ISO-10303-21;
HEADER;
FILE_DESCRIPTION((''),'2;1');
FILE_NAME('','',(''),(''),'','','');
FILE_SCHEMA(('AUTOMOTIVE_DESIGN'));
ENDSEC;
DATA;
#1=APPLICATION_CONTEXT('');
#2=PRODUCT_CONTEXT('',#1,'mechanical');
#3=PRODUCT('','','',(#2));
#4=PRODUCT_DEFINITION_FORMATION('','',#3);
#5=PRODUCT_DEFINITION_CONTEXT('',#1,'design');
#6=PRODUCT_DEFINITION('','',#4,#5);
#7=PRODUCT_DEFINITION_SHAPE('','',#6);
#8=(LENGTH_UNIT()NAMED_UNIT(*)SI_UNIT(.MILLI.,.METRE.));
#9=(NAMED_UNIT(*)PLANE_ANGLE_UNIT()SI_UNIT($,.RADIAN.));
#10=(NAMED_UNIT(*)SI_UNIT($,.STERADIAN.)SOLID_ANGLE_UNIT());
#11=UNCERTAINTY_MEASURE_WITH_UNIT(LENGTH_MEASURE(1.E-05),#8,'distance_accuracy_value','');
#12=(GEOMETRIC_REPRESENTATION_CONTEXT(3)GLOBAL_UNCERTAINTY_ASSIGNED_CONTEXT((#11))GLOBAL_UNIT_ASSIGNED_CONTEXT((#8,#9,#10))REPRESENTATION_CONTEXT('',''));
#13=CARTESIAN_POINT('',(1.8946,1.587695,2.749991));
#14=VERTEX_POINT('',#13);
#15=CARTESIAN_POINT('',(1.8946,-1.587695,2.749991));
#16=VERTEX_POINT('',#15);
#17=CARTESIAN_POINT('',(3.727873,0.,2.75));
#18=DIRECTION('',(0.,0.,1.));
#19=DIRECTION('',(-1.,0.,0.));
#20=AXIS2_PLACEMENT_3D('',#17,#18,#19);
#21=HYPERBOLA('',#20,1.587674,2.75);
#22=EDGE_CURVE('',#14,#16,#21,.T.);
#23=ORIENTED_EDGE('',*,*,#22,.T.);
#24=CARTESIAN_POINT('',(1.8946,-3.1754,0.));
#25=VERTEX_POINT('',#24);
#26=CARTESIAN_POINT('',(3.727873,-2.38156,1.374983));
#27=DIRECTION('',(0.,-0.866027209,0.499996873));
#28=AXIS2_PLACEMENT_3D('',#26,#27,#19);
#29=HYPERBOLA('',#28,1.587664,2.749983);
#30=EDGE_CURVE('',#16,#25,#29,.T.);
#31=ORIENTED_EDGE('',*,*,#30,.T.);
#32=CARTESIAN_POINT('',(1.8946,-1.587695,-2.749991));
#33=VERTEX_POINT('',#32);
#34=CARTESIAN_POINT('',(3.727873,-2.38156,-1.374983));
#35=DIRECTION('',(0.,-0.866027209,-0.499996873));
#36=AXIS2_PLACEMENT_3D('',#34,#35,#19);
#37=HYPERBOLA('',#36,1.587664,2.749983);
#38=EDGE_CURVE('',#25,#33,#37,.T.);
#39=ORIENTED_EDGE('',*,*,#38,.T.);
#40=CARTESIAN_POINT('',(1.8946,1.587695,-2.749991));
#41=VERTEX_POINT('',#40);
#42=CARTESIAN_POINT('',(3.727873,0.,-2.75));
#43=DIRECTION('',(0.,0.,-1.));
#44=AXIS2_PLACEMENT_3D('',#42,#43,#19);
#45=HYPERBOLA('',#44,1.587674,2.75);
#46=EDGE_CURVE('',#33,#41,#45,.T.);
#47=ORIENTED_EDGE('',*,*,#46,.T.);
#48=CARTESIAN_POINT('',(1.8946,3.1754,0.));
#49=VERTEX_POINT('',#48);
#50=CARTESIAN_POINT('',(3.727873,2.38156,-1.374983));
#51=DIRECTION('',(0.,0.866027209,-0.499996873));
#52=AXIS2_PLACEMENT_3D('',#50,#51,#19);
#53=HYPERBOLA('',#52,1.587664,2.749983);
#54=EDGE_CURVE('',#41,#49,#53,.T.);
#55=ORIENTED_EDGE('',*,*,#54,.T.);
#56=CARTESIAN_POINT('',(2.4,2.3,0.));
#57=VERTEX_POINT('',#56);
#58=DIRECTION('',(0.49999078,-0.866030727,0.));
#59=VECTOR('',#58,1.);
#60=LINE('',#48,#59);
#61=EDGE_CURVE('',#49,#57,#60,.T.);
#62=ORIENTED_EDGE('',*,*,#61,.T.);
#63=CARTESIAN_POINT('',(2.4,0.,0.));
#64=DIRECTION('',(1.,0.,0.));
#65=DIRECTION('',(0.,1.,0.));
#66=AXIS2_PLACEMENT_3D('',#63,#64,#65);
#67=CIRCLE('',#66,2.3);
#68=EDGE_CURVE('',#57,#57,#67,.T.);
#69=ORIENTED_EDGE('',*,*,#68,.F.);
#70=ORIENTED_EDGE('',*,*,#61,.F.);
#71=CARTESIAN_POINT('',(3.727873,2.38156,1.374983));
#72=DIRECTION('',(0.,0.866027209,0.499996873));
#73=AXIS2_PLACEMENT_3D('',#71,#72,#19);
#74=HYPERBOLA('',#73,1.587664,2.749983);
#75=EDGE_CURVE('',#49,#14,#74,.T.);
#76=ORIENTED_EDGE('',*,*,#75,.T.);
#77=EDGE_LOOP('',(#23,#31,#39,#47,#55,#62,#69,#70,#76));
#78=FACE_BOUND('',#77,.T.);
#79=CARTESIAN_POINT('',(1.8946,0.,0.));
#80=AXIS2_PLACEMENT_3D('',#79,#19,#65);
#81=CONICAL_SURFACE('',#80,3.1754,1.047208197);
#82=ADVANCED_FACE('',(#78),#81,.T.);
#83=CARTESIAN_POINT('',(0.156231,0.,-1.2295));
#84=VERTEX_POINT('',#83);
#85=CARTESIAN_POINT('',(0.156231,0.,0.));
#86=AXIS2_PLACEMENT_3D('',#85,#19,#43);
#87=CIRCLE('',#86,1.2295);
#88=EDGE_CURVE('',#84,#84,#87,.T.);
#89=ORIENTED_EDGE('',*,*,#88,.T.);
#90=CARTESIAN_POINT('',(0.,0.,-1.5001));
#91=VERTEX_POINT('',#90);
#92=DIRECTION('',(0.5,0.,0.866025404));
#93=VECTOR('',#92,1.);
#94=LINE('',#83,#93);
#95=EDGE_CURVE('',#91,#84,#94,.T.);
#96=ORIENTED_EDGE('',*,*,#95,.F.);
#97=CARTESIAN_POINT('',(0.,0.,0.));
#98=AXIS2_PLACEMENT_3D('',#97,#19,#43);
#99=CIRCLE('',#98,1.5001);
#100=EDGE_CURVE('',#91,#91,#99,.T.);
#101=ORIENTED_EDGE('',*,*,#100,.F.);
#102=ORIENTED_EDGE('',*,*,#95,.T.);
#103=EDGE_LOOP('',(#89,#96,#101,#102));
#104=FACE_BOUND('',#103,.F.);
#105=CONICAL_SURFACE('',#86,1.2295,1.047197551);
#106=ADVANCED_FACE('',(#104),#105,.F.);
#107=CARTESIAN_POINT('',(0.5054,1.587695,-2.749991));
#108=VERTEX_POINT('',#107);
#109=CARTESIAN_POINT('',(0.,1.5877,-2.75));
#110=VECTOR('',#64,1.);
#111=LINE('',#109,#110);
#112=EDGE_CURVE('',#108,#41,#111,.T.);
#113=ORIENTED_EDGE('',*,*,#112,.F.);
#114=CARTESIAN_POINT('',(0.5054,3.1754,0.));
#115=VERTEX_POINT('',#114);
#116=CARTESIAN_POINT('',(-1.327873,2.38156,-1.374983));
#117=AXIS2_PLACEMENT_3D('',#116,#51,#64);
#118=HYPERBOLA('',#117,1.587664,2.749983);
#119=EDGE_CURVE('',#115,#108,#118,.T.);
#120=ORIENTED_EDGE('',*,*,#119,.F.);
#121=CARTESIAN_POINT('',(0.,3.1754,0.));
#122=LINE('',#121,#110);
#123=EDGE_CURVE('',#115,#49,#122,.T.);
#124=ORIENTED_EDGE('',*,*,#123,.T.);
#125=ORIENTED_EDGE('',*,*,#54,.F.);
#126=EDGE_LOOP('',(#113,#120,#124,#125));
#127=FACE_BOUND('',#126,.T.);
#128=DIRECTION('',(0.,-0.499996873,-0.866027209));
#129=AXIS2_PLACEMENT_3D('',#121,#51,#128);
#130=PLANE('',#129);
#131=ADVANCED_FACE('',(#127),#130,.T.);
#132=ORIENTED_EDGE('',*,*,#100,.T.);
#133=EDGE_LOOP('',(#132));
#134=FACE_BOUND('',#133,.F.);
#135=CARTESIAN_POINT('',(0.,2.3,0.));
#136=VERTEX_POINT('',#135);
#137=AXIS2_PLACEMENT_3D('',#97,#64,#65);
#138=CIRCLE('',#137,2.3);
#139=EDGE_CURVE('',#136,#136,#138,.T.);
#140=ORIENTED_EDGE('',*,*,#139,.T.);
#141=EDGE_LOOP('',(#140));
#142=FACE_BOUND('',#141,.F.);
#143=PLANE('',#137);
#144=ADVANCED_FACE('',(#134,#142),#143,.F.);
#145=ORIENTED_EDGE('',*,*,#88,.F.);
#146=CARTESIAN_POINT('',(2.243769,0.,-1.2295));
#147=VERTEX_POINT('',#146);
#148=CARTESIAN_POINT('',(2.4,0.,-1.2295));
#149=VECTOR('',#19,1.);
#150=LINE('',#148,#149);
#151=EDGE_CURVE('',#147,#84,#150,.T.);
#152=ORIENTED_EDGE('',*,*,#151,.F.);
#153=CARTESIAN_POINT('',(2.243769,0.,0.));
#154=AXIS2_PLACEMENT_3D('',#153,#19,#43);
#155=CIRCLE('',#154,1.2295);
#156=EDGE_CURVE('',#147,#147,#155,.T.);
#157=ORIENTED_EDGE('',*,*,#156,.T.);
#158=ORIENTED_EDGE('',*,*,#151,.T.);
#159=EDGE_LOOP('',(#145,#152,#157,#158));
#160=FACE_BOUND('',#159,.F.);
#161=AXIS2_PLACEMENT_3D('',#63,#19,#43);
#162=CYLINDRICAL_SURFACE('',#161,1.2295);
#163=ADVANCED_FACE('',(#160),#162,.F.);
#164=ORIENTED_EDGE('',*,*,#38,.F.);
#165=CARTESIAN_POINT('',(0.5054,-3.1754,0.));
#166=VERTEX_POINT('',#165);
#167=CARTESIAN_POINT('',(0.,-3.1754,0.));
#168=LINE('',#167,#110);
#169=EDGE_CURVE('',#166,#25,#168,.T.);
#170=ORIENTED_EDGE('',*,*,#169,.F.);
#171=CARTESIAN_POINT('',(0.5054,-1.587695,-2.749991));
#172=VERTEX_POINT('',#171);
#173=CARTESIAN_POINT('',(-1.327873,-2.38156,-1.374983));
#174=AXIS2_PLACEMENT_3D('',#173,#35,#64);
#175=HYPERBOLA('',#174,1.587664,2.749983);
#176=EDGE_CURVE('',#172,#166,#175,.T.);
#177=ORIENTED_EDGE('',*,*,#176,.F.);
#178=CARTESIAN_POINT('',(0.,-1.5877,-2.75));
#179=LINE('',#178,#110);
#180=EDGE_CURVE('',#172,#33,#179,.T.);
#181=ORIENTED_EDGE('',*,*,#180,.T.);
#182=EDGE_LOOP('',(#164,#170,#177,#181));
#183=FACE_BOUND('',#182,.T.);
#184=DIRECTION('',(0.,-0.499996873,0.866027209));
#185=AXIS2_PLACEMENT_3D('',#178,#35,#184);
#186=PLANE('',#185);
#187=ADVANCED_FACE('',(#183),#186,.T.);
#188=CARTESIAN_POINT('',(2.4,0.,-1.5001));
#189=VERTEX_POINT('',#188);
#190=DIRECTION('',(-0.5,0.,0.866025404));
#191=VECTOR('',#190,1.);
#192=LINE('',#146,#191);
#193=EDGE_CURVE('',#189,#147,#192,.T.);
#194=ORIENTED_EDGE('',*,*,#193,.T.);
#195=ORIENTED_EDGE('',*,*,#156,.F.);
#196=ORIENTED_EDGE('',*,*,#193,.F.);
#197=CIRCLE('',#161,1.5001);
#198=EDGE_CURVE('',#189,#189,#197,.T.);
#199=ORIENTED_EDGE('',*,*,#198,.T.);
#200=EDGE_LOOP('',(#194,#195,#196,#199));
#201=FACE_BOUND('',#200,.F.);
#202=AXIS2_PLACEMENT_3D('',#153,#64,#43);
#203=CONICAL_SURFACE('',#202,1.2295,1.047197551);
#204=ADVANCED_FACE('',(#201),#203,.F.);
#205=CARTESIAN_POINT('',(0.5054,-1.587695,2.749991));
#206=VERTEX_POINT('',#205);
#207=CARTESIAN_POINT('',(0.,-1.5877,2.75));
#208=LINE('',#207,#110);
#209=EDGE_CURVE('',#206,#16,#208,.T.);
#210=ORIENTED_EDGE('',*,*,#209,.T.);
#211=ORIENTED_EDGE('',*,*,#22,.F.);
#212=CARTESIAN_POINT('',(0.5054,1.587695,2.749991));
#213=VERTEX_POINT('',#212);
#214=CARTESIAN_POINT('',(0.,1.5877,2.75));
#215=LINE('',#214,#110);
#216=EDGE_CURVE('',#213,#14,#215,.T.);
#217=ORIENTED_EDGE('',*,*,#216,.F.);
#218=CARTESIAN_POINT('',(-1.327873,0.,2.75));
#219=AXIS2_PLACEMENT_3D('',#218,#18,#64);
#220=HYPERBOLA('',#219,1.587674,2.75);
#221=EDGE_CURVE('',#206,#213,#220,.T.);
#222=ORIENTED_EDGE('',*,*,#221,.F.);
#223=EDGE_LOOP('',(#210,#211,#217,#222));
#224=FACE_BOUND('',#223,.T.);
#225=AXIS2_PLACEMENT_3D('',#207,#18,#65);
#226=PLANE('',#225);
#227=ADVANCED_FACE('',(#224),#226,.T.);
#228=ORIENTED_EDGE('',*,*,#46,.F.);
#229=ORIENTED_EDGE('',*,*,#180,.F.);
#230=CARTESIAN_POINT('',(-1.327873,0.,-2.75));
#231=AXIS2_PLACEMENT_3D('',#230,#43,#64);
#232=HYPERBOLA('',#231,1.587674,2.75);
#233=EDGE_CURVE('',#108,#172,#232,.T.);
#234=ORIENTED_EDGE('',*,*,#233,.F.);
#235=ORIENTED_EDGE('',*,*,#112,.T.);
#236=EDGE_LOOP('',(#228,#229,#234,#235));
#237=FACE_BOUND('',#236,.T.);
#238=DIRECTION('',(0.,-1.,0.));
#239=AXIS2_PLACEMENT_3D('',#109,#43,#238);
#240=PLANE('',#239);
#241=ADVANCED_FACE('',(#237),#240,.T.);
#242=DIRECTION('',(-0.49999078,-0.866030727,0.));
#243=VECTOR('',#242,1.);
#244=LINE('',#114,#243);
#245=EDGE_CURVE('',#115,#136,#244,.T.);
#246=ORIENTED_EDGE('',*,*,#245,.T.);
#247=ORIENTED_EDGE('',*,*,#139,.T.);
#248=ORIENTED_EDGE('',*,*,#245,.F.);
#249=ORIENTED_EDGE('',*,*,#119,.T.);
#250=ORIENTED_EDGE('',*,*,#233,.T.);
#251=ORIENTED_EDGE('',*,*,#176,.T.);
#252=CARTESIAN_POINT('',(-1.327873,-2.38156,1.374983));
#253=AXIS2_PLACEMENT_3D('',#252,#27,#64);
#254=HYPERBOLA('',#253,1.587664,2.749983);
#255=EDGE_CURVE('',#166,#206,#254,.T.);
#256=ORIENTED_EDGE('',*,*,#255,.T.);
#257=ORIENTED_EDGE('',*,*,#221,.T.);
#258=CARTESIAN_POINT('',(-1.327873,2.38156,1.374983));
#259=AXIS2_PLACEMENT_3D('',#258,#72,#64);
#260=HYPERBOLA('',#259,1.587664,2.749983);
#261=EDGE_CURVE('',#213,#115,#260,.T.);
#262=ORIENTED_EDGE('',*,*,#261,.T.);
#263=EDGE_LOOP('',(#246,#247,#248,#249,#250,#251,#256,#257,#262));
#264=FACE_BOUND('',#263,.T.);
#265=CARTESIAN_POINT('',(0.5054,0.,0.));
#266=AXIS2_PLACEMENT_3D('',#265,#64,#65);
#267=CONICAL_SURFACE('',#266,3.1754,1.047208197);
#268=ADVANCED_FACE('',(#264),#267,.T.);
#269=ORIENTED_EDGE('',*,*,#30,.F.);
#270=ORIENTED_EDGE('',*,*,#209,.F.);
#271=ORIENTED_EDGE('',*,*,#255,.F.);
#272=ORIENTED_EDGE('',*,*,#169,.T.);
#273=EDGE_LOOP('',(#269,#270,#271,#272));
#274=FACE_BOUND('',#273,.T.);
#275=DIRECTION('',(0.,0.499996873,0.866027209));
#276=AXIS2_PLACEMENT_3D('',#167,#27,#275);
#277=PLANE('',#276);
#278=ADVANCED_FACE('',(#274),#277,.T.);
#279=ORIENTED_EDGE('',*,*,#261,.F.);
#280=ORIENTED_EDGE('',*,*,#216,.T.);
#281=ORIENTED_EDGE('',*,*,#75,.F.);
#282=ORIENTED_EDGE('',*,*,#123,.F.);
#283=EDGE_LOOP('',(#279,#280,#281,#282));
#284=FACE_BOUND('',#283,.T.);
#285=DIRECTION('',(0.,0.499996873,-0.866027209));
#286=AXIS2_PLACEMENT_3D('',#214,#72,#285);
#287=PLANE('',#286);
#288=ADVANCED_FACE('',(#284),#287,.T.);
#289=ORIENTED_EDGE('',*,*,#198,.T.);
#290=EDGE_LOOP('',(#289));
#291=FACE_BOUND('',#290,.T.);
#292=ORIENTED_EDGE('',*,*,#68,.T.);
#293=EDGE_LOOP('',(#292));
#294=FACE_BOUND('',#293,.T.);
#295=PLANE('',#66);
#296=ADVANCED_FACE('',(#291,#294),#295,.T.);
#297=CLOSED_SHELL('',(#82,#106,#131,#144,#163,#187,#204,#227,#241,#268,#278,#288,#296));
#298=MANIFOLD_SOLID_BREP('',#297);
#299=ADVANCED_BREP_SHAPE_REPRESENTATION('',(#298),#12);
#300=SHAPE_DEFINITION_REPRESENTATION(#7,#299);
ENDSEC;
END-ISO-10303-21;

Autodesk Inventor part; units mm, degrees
ref_plane "YZ Plane" through (0, 0, 0) normal (1, 0, 0) x (0, 1, 0)
ref_plane "XZ Plane" through (0, 0, 0) normal (0, 1, 0) x (-1, 0, 0)
sketch "Skizze1" plane through (0, 0, 0) normal (1, 0, 0) x (0, 1, 0)
  line L0 (-3.1754, 0) -> (-1.5877, 2.75)
  line L1 (-1.5877, 2.75) -> (1.5877, 2.75)
  line L2 (1.5877, 2.75) -> (3.1754, 0)
  line L3 (3.1754, 0) -> (1.5877, -2.75)
  line L4 (1.5877, -2.75) -> (-1.5877, -2.75)
  line L5 (-1.5877, -2.75) -> (-3.1754, 0)
  point P0 (0, 0)
  point P1 (0, 0)
  dimension "d0" = 6.3509
extrude "Körper" add sketch "Skizze1" along normal blind 2.4
sketch "Skizze2" plane through (0, 0, 0) normal (0, 0, 1) x (1, 0, 0)
  line L0 (0, 1.5877) -> (0, 3.1754) projected
  line L1 (0, 3.1754) -> (2.4, 3.1754) projected
  line L2 (2.4, 1.5877) -> (2.4, 3.1754) projected
  line L3 (-0.48, 0) -> (2.88, 0) projected
  line L4 (0.5054, 3.1754) -> (0, 2.3)
  line L5 (1.8946, 3.1754) -> (2.4, 2.3)
  dimension "d3" = 30
  dimension "d4" = 30
  dimension "d5" = 4.6
  dimension "d6" = 4.6
revolve "Fase1" cut sketch "Skizze2" angle 360 about axis through (-10, 0, 0) along (1, 0, 0)
sketch "Skizze3" plane through (2.4, 0, 0) normal (1, 0, 0) x (0, 0, -1)
  arc A0 (-0.625, -1.0825) -> (0.625, -1.0825) centre (0, 0) ccw projected
hole "Gewinde" at (2.4, 0, 0) direction (-1, 0, 0) diameter 2.459 end through all thread size "M3x0.5" class "6H" standard "ISO Metric profile"
chamfer "Fase2" distance 0.2706 angle 30 1 edges at (2.4, 0, 1.2295) measured on face at (2.4, 1.9179, -0.2329)
chamfer "Fase3" distance 0.2706 angle 30 1 edges at (0, 0, 1.2295) measured on face at (0, 1.9179, -0.2329)
ref_plane "Work Plane1" through (-6.3375, 0, 0) normal (0, -0.8660254, -0.5) x (1, 0, 0)
equation "\"d0\" = 1.1547 * SW"
equation "\"d1\" = KOH"
equation "\"d8\" = -0.5 * GD1 + 0.5 * NND"
equation "\"d40\" = -0.5 * GD1 + 0.5 * NND"
equation "\"d10\" = -0.5 * GD1 + 0.5 * NND"
equation "\"d41\" = -0.5 * GD1 + 0.5 * NND"
equation "\"d3\" = ANG1"
equation "\"d4\" = ANG2"
equation "\"d5\" = SW0"
equation "\"d6\" = SW01"
equation "\"ANG1\" = 30deg"
equation "\"ANG2\" = 30deg"
equation "\"NND\" = 3"
equation "\"KOH\" = 2.4"
equation "\"SW\" = 5.5"
equation "\"SW0\" = 4.6"
equation "\"SW01\" = 4.6"
equation "\"GUL\" = 0.541266 * PTC"
equation "\"THREADDIA\" = 3"
equation "\"TOA\" = 30deg"
equation "\"PTC\" = 0.5"
equation "\"E0\" = 1.155 * SW"
equation "\"GAL\" = 0.541266 * PTC"
equation "\"GD1\" = 2.458734"
properties part number "ISO 4032 - M3" material "Edelstahl, 440C"
